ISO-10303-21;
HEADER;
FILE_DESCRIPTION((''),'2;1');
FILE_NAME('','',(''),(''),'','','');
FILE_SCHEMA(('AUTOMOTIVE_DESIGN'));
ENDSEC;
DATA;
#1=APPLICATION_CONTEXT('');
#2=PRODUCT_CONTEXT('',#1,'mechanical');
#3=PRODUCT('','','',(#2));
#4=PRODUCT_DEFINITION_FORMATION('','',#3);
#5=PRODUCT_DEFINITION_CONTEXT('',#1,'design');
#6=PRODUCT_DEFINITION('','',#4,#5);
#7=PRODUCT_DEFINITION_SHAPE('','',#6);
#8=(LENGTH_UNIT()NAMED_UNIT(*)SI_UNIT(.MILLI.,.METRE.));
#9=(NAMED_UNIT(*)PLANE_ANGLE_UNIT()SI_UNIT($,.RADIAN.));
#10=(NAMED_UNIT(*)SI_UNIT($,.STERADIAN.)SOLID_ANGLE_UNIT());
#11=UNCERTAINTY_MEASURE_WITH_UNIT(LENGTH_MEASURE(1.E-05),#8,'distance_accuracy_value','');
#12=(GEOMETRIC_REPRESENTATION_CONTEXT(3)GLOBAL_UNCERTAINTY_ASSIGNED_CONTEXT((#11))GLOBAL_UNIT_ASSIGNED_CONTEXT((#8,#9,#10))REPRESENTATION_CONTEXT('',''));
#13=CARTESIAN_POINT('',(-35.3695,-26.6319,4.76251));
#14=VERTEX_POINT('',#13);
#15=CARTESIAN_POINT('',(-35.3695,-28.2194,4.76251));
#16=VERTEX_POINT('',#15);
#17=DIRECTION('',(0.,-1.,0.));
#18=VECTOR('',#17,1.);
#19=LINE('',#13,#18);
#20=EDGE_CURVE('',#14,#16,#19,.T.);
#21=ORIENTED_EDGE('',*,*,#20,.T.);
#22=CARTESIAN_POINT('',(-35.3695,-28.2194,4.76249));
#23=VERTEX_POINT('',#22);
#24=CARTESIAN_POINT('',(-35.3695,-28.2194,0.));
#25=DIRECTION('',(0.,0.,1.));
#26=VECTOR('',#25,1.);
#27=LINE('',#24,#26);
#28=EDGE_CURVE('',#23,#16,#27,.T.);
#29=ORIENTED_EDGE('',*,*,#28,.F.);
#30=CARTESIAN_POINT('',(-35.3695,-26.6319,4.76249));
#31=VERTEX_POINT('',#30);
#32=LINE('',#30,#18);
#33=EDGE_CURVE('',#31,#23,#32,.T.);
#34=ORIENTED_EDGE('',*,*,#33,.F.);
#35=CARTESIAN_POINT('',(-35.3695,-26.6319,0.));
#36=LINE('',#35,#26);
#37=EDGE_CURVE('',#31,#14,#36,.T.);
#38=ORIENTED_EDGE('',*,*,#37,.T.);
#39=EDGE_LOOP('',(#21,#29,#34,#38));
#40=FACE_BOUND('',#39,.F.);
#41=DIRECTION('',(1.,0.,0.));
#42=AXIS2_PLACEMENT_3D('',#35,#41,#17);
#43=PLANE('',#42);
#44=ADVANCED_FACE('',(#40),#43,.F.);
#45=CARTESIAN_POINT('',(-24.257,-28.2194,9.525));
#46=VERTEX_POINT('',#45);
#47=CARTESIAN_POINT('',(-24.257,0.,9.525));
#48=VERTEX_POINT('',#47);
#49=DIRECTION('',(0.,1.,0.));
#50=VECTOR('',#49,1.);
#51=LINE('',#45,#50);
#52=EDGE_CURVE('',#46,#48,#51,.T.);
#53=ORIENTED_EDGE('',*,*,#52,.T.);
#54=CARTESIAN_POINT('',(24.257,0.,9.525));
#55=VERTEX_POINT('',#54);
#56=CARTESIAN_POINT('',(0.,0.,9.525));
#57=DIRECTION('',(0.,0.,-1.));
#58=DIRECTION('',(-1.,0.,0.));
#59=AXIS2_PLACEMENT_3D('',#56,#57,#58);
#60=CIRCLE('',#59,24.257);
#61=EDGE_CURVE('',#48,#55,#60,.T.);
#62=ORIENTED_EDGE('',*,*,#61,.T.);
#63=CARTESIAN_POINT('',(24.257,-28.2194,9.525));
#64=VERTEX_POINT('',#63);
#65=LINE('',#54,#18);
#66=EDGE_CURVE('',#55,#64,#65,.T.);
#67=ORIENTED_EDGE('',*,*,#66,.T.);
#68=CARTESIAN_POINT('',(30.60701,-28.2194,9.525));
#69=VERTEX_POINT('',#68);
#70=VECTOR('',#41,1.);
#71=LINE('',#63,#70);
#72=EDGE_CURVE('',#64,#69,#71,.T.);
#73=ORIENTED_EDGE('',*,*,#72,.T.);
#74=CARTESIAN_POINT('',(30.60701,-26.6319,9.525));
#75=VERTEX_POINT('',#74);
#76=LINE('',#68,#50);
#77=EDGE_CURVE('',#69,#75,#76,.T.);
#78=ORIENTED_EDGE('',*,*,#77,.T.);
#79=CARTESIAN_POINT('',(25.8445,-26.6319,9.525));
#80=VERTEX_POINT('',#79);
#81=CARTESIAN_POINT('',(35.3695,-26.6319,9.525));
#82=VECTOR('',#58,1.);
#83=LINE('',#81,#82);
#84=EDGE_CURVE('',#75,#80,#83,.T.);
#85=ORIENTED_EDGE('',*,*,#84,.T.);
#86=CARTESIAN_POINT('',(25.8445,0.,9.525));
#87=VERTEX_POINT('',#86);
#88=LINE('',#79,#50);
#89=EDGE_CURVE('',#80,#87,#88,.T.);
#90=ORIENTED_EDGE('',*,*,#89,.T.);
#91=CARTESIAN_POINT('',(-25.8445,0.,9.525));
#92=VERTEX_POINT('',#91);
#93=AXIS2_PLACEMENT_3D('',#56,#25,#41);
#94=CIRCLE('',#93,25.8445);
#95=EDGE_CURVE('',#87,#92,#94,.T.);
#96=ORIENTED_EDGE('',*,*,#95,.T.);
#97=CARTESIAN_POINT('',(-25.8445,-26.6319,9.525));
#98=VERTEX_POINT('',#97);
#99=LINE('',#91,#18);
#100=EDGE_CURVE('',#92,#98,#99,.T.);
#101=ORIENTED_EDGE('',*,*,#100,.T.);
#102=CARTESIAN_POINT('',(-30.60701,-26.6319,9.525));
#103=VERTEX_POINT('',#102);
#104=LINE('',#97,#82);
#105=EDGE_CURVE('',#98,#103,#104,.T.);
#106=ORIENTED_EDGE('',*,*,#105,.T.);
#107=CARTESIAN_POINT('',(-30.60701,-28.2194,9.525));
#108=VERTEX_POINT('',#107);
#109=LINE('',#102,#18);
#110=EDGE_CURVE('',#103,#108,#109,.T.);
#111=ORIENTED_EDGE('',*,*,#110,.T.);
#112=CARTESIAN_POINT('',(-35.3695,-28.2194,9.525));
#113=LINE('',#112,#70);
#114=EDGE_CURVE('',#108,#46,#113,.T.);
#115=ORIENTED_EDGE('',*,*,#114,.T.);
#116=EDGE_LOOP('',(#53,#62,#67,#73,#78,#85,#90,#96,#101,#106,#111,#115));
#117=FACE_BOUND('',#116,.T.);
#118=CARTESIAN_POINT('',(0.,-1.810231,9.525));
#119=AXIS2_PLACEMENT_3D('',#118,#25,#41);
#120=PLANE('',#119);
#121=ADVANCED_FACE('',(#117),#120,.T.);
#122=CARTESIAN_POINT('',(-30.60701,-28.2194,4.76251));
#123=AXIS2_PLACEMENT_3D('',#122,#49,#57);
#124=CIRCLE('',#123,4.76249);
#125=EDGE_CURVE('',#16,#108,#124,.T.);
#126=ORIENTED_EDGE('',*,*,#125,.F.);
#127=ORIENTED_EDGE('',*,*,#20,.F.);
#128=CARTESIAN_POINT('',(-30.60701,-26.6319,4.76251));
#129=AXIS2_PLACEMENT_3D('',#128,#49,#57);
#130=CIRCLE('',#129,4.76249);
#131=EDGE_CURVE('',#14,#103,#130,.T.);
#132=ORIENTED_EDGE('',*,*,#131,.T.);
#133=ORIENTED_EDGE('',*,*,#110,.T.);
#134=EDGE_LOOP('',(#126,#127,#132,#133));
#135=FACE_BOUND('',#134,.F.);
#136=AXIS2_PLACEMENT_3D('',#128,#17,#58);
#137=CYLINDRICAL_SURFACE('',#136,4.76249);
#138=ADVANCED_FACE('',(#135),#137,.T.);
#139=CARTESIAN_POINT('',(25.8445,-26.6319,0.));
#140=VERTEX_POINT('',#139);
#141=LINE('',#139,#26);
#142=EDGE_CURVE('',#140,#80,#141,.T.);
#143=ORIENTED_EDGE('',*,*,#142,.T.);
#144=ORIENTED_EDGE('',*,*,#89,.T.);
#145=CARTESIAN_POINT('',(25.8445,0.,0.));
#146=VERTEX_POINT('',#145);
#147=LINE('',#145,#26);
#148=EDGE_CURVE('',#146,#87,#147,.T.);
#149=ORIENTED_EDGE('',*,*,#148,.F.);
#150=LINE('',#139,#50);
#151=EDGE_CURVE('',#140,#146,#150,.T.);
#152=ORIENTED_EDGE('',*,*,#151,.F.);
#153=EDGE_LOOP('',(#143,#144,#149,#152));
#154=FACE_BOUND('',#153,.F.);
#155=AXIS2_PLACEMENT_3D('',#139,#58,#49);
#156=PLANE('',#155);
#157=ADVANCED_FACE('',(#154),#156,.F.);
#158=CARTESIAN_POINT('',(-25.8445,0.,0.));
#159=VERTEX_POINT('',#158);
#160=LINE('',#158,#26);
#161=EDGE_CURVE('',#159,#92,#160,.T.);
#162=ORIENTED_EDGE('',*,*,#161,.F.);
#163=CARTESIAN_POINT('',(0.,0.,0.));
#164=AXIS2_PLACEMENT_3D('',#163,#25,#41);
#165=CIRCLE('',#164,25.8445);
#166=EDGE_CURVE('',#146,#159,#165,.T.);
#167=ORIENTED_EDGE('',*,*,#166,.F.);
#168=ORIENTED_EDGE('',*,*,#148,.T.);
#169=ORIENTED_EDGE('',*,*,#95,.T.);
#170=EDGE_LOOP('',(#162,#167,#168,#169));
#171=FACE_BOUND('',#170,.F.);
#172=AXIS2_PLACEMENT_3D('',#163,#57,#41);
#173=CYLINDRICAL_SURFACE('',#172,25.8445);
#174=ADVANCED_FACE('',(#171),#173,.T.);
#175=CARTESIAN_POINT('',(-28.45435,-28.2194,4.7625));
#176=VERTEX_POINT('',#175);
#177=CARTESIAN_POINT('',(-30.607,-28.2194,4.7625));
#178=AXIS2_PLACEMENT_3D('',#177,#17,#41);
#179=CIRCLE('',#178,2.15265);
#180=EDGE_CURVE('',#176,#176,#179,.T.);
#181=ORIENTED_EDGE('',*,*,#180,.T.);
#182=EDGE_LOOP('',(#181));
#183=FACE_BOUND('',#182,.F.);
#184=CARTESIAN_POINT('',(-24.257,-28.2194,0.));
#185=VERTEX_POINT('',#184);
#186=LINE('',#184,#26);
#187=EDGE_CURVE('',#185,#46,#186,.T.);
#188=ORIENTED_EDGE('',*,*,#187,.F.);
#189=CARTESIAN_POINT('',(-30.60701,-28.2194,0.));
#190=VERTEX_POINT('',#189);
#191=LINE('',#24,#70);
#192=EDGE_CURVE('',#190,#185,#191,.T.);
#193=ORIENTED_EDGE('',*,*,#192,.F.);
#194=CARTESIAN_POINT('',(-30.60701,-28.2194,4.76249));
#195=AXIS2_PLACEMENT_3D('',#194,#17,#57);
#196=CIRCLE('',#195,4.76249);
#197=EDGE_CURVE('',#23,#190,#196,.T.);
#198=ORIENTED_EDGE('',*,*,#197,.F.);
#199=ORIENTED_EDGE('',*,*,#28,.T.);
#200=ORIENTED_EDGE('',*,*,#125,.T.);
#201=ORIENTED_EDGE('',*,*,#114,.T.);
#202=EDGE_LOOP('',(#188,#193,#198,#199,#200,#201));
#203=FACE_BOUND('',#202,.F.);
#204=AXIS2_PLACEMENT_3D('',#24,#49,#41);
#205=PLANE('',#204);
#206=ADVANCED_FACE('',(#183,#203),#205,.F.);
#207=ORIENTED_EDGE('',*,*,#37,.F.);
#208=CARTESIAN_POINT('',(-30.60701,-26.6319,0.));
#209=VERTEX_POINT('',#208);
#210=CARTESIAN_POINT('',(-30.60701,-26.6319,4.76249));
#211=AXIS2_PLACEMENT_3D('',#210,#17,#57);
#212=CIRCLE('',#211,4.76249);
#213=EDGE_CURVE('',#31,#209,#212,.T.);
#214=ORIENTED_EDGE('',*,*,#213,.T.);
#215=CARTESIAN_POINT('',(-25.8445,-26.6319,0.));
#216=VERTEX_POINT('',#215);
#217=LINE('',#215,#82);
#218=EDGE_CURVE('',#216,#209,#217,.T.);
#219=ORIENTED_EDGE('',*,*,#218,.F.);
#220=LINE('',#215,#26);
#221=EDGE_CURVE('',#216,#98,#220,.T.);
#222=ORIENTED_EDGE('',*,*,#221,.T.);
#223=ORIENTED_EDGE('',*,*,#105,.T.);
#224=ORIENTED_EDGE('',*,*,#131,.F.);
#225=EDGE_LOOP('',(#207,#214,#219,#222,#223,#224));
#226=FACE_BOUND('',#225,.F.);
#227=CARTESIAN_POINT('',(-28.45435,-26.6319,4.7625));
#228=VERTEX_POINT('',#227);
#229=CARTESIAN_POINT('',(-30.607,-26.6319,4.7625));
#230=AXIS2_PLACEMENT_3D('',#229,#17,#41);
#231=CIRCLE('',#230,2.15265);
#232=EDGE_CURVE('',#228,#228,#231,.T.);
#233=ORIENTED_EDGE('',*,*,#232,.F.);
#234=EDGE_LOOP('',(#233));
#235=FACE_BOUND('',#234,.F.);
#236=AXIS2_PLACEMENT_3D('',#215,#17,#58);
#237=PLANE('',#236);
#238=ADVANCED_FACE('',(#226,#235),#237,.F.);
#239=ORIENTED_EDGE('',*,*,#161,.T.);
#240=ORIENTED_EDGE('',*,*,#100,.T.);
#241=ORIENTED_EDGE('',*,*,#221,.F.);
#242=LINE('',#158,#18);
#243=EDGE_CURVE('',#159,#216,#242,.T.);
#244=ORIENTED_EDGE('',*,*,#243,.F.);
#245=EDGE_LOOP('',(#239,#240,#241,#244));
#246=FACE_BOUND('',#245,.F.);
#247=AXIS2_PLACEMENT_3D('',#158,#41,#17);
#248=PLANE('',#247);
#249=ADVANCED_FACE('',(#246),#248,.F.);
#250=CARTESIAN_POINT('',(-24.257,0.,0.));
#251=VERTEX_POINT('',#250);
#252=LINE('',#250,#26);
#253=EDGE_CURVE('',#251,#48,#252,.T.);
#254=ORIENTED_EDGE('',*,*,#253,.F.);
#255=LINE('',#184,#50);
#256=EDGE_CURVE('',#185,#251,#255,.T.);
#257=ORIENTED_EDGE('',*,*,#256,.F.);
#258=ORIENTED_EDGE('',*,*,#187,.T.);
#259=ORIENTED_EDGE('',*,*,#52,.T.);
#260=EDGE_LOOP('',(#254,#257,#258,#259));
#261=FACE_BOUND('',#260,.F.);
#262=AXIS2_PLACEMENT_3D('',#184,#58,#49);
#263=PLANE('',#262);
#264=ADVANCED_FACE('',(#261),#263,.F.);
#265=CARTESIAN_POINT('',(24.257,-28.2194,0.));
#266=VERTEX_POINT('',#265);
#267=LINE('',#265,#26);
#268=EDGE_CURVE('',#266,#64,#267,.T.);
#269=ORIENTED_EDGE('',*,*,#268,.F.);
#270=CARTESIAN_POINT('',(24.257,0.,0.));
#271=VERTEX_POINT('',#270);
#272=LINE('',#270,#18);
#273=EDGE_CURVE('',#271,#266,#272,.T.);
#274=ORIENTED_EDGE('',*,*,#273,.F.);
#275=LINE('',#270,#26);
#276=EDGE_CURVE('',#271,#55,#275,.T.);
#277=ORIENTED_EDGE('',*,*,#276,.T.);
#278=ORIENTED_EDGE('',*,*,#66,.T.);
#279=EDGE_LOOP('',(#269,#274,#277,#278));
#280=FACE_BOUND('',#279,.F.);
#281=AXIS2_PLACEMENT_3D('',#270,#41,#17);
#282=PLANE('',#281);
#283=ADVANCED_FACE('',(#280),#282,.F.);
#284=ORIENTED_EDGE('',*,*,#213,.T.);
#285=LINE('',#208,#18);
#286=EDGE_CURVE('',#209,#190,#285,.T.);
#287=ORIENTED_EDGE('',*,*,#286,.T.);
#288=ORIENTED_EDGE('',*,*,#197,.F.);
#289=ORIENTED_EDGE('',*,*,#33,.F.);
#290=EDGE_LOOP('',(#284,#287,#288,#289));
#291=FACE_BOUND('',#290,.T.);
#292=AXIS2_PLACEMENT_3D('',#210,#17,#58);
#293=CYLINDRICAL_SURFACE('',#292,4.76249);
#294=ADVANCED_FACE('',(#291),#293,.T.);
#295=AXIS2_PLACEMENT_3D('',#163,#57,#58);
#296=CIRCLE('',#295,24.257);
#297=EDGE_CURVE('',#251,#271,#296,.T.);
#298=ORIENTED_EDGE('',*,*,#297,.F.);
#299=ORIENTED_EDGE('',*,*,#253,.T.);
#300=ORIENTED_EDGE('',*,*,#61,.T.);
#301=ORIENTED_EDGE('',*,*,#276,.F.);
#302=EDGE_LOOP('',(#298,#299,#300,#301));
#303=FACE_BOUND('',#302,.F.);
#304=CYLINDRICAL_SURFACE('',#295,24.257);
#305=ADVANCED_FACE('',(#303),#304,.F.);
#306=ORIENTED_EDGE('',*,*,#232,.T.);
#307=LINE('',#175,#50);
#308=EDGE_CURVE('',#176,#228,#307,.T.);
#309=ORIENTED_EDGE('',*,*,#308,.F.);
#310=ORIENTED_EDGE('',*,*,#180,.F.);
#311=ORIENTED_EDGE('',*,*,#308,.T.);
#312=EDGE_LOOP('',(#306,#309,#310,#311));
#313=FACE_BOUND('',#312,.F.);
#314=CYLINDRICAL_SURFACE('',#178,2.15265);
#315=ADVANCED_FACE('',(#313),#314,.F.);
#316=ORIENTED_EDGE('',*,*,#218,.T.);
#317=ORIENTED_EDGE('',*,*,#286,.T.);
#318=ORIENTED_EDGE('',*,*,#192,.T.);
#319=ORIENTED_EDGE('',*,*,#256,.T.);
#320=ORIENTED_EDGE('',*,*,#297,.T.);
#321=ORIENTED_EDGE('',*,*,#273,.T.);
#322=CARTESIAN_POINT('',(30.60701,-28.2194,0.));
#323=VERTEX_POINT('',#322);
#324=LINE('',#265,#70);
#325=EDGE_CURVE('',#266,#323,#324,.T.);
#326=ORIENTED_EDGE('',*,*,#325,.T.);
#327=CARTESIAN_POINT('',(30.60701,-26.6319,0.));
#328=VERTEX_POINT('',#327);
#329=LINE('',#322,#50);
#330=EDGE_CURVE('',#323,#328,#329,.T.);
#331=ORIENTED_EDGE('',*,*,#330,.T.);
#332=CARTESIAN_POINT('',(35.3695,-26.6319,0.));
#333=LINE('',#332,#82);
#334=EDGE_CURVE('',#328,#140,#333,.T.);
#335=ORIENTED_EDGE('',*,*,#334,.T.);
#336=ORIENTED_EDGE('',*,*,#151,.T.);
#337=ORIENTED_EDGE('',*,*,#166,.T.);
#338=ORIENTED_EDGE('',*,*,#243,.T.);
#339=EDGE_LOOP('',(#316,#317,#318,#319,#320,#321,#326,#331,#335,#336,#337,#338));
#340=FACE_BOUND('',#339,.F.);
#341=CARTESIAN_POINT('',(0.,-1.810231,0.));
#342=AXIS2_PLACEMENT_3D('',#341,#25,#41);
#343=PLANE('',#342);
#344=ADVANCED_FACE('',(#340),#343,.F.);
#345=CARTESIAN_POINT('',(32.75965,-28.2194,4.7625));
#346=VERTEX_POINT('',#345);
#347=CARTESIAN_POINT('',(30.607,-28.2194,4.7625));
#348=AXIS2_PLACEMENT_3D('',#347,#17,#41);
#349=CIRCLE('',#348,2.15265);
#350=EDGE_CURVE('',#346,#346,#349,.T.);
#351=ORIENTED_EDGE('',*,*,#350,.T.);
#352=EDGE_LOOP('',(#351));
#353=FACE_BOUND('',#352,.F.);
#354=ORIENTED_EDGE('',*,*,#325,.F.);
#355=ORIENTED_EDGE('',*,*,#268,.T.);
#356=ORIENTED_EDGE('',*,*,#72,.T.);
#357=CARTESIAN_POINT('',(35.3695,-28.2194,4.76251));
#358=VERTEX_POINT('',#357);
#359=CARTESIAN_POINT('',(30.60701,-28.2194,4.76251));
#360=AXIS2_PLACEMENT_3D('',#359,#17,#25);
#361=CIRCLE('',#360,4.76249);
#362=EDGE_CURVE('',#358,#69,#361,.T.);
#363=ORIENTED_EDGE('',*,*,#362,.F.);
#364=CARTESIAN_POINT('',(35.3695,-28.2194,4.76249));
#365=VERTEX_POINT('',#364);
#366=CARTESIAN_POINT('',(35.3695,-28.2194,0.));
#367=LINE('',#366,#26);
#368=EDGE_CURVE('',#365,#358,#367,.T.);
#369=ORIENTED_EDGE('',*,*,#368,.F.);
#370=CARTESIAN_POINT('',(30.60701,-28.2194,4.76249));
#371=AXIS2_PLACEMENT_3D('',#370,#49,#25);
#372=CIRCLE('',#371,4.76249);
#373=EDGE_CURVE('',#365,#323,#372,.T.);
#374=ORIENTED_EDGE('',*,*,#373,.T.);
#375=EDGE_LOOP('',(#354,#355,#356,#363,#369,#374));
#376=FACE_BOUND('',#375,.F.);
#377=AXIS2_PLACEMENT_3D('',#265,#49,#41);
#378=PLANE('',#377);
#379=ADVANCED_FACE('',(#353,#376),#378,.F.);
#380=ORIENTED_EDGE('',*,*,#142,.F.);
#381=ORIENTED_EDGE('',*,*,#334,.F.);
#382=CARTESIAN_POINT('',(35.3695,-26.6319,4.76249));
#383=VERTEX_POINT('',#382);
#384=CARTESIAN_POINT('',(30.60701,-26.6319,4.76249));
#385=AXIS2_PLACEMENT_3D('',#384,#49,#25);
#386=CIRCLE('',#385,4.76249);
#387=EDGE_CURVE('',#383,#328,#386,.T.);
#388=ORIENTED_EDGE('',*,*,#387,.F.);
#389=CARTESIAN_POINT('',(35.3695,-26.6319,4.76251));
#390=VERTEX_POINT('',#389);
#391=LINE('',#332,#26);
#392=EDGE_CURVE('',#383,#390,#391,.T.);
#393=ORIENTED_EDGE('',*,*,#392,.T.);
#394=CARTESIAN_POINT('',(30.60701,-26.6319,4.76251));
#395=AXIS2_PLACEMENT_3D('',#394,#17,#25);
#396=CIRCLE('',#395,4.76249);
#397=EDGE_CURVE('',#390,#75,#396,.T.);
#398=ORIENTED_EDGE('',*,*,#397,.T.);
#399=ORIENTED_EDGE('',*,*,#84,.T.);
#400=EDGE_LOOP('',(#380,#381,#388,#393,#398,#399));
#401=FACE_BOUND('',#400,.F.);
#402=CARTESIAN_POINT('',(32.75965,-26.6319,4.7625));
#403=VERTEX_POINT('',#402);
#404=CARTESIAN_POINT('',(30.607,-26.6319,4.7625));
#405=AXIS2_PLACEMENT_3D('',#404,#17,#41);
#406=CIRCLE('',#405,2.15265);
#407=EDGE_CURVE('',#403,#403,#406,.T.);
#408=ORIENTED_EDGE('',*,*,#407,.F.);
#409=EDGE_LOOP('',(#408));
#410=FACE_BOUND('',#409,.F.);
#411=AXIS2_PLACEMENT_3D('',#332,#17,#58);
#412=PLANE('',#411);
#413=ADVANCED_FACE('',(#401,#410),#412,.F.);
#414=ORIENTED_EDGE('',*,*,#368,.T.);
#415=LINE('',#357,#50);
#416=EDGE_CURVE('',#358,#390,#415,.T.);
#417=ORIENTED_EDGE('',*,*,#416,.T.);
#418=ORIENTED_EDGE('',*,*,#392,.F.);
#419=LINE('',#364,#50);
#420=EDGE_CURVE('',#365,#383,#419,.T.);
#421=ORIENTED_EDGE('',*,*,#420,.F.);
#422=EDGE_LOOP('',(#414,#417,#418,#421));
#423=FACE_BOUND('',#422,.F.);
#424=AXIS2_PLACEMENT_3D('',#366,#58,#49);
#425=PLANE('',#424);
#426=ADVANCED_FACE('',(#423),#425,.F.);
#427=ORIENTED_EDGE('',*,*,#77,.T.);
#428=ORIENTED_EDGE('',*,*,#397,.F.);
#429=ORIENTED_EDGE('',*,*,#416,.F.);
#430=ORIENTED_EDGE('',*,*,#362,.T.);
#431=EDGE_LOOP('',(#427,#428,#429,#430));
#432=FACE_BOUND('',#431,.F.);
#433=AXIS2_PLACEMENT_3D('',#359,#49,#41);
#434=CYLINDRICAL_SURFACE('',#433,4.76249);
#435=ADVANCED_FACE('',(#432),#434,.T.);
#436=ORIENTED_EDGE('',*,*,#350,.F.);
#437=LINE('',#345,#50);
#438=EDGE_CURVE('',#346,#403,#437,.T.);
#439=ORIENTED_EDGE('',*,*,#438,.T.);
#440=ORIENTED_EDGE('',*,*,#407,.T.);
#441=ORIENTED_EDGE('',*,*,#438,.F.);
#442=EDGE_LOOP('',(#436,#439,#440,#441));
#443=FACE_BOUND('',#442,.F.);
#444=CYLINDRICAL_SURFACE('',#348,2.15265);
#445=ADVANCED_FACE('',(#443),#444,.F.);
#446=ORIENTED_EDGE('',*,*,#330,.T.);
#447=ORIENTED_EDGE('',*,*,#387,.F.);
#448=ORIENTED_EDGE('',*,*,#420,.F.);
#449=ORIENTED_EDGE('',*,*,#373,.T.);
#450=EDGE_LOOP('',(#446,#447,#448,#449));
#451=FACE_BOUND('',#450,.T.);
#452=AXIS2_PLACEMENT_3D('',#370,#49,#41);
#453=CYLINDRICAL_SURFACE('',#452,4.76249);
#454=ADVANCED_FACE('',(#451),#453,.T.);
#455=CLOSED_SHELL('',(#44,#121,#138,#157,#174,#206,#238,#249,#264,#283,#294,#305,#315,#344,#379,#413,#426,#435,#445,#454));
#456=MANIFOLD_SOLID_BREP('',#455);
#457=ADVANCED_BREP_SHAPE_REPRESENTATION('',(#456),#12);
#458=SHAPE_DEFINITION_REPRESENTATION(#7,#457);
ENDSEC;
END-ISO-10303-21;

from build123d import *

# Parameters (mm, degrees)
F1_DEPTH = 9.525
F2_R     = 4.76249
F3_R     = 2.15265
F4_DEPTH = 1.5875


# Not quite as in the source:
# - a fillet or chamfer is up to 0.001 mm smaller than in the source, because OpenCascade refuses the exact size


with BuildPart() as f1:
    # F0 (on Top) → F1 (new body)
    with BuildSketch(Plane.XY):
        with BuildLine():
            Line((-24.257, -28.2194), (-24.257, 0))
            ThreePointArc((-24.257, 0), (0, 24.257), (24.257, 0))
            Line((24.257, 0), (24.257, -28.2194))
            Line((24.257, -28.2194), (35.3695, -28.2194))
            Line((35.3695, -28.2194), (35.3695, -26.6319))
            Line((35.3695, -26.6319), (25.8445, -26.6319))
            Line((25.8445, -26.6319), (25.8445, 0))
            ThreePointArc((25.8445, 0), (0, 25.8445), (-25.8445, 0))
            Line((-25.8445, 0), (-25.8445, -26.6319))
            Line((-25.8445, -26.6319), (-35.3695, -26.6319))
            Line((-35.3695, -26.6319), (-35.3695, -28.2194))
            Line((-35.3695, -28.2194), (-24.257, -28.2194))
        make_face()
    extrude(amount=F1_DEPTH)

    # F2 (radius 4.7625 in the source; OpenCascade refuses exactly that, so slightly less here)
    f2_edges = [f1.edges().sort_by_distance(p)[0] for p in [
        (35.3695, -27.42565, 9.525),
        (35.3695, -27.42565, 0),
        (-35.3695, -27.42565, 0),
        (-35.3695, -27.42565, 9.525),
    ]]
    fillet(f2_edges, radius=F2_R)

    # F3 (on face) → F4 (cut, through all)
    with BuildSketch(Plane.XZ.offset(28.2194)):
        with Locations((30.607, 4.7625)):
            Circle(F3_R)
        with Locations((-30.607, 4.7625)):
            Circle(F3_R)
    extrude(amount=-F4_DEPTH, mode=Mode.SUBTRACT)


solid = f1.part
